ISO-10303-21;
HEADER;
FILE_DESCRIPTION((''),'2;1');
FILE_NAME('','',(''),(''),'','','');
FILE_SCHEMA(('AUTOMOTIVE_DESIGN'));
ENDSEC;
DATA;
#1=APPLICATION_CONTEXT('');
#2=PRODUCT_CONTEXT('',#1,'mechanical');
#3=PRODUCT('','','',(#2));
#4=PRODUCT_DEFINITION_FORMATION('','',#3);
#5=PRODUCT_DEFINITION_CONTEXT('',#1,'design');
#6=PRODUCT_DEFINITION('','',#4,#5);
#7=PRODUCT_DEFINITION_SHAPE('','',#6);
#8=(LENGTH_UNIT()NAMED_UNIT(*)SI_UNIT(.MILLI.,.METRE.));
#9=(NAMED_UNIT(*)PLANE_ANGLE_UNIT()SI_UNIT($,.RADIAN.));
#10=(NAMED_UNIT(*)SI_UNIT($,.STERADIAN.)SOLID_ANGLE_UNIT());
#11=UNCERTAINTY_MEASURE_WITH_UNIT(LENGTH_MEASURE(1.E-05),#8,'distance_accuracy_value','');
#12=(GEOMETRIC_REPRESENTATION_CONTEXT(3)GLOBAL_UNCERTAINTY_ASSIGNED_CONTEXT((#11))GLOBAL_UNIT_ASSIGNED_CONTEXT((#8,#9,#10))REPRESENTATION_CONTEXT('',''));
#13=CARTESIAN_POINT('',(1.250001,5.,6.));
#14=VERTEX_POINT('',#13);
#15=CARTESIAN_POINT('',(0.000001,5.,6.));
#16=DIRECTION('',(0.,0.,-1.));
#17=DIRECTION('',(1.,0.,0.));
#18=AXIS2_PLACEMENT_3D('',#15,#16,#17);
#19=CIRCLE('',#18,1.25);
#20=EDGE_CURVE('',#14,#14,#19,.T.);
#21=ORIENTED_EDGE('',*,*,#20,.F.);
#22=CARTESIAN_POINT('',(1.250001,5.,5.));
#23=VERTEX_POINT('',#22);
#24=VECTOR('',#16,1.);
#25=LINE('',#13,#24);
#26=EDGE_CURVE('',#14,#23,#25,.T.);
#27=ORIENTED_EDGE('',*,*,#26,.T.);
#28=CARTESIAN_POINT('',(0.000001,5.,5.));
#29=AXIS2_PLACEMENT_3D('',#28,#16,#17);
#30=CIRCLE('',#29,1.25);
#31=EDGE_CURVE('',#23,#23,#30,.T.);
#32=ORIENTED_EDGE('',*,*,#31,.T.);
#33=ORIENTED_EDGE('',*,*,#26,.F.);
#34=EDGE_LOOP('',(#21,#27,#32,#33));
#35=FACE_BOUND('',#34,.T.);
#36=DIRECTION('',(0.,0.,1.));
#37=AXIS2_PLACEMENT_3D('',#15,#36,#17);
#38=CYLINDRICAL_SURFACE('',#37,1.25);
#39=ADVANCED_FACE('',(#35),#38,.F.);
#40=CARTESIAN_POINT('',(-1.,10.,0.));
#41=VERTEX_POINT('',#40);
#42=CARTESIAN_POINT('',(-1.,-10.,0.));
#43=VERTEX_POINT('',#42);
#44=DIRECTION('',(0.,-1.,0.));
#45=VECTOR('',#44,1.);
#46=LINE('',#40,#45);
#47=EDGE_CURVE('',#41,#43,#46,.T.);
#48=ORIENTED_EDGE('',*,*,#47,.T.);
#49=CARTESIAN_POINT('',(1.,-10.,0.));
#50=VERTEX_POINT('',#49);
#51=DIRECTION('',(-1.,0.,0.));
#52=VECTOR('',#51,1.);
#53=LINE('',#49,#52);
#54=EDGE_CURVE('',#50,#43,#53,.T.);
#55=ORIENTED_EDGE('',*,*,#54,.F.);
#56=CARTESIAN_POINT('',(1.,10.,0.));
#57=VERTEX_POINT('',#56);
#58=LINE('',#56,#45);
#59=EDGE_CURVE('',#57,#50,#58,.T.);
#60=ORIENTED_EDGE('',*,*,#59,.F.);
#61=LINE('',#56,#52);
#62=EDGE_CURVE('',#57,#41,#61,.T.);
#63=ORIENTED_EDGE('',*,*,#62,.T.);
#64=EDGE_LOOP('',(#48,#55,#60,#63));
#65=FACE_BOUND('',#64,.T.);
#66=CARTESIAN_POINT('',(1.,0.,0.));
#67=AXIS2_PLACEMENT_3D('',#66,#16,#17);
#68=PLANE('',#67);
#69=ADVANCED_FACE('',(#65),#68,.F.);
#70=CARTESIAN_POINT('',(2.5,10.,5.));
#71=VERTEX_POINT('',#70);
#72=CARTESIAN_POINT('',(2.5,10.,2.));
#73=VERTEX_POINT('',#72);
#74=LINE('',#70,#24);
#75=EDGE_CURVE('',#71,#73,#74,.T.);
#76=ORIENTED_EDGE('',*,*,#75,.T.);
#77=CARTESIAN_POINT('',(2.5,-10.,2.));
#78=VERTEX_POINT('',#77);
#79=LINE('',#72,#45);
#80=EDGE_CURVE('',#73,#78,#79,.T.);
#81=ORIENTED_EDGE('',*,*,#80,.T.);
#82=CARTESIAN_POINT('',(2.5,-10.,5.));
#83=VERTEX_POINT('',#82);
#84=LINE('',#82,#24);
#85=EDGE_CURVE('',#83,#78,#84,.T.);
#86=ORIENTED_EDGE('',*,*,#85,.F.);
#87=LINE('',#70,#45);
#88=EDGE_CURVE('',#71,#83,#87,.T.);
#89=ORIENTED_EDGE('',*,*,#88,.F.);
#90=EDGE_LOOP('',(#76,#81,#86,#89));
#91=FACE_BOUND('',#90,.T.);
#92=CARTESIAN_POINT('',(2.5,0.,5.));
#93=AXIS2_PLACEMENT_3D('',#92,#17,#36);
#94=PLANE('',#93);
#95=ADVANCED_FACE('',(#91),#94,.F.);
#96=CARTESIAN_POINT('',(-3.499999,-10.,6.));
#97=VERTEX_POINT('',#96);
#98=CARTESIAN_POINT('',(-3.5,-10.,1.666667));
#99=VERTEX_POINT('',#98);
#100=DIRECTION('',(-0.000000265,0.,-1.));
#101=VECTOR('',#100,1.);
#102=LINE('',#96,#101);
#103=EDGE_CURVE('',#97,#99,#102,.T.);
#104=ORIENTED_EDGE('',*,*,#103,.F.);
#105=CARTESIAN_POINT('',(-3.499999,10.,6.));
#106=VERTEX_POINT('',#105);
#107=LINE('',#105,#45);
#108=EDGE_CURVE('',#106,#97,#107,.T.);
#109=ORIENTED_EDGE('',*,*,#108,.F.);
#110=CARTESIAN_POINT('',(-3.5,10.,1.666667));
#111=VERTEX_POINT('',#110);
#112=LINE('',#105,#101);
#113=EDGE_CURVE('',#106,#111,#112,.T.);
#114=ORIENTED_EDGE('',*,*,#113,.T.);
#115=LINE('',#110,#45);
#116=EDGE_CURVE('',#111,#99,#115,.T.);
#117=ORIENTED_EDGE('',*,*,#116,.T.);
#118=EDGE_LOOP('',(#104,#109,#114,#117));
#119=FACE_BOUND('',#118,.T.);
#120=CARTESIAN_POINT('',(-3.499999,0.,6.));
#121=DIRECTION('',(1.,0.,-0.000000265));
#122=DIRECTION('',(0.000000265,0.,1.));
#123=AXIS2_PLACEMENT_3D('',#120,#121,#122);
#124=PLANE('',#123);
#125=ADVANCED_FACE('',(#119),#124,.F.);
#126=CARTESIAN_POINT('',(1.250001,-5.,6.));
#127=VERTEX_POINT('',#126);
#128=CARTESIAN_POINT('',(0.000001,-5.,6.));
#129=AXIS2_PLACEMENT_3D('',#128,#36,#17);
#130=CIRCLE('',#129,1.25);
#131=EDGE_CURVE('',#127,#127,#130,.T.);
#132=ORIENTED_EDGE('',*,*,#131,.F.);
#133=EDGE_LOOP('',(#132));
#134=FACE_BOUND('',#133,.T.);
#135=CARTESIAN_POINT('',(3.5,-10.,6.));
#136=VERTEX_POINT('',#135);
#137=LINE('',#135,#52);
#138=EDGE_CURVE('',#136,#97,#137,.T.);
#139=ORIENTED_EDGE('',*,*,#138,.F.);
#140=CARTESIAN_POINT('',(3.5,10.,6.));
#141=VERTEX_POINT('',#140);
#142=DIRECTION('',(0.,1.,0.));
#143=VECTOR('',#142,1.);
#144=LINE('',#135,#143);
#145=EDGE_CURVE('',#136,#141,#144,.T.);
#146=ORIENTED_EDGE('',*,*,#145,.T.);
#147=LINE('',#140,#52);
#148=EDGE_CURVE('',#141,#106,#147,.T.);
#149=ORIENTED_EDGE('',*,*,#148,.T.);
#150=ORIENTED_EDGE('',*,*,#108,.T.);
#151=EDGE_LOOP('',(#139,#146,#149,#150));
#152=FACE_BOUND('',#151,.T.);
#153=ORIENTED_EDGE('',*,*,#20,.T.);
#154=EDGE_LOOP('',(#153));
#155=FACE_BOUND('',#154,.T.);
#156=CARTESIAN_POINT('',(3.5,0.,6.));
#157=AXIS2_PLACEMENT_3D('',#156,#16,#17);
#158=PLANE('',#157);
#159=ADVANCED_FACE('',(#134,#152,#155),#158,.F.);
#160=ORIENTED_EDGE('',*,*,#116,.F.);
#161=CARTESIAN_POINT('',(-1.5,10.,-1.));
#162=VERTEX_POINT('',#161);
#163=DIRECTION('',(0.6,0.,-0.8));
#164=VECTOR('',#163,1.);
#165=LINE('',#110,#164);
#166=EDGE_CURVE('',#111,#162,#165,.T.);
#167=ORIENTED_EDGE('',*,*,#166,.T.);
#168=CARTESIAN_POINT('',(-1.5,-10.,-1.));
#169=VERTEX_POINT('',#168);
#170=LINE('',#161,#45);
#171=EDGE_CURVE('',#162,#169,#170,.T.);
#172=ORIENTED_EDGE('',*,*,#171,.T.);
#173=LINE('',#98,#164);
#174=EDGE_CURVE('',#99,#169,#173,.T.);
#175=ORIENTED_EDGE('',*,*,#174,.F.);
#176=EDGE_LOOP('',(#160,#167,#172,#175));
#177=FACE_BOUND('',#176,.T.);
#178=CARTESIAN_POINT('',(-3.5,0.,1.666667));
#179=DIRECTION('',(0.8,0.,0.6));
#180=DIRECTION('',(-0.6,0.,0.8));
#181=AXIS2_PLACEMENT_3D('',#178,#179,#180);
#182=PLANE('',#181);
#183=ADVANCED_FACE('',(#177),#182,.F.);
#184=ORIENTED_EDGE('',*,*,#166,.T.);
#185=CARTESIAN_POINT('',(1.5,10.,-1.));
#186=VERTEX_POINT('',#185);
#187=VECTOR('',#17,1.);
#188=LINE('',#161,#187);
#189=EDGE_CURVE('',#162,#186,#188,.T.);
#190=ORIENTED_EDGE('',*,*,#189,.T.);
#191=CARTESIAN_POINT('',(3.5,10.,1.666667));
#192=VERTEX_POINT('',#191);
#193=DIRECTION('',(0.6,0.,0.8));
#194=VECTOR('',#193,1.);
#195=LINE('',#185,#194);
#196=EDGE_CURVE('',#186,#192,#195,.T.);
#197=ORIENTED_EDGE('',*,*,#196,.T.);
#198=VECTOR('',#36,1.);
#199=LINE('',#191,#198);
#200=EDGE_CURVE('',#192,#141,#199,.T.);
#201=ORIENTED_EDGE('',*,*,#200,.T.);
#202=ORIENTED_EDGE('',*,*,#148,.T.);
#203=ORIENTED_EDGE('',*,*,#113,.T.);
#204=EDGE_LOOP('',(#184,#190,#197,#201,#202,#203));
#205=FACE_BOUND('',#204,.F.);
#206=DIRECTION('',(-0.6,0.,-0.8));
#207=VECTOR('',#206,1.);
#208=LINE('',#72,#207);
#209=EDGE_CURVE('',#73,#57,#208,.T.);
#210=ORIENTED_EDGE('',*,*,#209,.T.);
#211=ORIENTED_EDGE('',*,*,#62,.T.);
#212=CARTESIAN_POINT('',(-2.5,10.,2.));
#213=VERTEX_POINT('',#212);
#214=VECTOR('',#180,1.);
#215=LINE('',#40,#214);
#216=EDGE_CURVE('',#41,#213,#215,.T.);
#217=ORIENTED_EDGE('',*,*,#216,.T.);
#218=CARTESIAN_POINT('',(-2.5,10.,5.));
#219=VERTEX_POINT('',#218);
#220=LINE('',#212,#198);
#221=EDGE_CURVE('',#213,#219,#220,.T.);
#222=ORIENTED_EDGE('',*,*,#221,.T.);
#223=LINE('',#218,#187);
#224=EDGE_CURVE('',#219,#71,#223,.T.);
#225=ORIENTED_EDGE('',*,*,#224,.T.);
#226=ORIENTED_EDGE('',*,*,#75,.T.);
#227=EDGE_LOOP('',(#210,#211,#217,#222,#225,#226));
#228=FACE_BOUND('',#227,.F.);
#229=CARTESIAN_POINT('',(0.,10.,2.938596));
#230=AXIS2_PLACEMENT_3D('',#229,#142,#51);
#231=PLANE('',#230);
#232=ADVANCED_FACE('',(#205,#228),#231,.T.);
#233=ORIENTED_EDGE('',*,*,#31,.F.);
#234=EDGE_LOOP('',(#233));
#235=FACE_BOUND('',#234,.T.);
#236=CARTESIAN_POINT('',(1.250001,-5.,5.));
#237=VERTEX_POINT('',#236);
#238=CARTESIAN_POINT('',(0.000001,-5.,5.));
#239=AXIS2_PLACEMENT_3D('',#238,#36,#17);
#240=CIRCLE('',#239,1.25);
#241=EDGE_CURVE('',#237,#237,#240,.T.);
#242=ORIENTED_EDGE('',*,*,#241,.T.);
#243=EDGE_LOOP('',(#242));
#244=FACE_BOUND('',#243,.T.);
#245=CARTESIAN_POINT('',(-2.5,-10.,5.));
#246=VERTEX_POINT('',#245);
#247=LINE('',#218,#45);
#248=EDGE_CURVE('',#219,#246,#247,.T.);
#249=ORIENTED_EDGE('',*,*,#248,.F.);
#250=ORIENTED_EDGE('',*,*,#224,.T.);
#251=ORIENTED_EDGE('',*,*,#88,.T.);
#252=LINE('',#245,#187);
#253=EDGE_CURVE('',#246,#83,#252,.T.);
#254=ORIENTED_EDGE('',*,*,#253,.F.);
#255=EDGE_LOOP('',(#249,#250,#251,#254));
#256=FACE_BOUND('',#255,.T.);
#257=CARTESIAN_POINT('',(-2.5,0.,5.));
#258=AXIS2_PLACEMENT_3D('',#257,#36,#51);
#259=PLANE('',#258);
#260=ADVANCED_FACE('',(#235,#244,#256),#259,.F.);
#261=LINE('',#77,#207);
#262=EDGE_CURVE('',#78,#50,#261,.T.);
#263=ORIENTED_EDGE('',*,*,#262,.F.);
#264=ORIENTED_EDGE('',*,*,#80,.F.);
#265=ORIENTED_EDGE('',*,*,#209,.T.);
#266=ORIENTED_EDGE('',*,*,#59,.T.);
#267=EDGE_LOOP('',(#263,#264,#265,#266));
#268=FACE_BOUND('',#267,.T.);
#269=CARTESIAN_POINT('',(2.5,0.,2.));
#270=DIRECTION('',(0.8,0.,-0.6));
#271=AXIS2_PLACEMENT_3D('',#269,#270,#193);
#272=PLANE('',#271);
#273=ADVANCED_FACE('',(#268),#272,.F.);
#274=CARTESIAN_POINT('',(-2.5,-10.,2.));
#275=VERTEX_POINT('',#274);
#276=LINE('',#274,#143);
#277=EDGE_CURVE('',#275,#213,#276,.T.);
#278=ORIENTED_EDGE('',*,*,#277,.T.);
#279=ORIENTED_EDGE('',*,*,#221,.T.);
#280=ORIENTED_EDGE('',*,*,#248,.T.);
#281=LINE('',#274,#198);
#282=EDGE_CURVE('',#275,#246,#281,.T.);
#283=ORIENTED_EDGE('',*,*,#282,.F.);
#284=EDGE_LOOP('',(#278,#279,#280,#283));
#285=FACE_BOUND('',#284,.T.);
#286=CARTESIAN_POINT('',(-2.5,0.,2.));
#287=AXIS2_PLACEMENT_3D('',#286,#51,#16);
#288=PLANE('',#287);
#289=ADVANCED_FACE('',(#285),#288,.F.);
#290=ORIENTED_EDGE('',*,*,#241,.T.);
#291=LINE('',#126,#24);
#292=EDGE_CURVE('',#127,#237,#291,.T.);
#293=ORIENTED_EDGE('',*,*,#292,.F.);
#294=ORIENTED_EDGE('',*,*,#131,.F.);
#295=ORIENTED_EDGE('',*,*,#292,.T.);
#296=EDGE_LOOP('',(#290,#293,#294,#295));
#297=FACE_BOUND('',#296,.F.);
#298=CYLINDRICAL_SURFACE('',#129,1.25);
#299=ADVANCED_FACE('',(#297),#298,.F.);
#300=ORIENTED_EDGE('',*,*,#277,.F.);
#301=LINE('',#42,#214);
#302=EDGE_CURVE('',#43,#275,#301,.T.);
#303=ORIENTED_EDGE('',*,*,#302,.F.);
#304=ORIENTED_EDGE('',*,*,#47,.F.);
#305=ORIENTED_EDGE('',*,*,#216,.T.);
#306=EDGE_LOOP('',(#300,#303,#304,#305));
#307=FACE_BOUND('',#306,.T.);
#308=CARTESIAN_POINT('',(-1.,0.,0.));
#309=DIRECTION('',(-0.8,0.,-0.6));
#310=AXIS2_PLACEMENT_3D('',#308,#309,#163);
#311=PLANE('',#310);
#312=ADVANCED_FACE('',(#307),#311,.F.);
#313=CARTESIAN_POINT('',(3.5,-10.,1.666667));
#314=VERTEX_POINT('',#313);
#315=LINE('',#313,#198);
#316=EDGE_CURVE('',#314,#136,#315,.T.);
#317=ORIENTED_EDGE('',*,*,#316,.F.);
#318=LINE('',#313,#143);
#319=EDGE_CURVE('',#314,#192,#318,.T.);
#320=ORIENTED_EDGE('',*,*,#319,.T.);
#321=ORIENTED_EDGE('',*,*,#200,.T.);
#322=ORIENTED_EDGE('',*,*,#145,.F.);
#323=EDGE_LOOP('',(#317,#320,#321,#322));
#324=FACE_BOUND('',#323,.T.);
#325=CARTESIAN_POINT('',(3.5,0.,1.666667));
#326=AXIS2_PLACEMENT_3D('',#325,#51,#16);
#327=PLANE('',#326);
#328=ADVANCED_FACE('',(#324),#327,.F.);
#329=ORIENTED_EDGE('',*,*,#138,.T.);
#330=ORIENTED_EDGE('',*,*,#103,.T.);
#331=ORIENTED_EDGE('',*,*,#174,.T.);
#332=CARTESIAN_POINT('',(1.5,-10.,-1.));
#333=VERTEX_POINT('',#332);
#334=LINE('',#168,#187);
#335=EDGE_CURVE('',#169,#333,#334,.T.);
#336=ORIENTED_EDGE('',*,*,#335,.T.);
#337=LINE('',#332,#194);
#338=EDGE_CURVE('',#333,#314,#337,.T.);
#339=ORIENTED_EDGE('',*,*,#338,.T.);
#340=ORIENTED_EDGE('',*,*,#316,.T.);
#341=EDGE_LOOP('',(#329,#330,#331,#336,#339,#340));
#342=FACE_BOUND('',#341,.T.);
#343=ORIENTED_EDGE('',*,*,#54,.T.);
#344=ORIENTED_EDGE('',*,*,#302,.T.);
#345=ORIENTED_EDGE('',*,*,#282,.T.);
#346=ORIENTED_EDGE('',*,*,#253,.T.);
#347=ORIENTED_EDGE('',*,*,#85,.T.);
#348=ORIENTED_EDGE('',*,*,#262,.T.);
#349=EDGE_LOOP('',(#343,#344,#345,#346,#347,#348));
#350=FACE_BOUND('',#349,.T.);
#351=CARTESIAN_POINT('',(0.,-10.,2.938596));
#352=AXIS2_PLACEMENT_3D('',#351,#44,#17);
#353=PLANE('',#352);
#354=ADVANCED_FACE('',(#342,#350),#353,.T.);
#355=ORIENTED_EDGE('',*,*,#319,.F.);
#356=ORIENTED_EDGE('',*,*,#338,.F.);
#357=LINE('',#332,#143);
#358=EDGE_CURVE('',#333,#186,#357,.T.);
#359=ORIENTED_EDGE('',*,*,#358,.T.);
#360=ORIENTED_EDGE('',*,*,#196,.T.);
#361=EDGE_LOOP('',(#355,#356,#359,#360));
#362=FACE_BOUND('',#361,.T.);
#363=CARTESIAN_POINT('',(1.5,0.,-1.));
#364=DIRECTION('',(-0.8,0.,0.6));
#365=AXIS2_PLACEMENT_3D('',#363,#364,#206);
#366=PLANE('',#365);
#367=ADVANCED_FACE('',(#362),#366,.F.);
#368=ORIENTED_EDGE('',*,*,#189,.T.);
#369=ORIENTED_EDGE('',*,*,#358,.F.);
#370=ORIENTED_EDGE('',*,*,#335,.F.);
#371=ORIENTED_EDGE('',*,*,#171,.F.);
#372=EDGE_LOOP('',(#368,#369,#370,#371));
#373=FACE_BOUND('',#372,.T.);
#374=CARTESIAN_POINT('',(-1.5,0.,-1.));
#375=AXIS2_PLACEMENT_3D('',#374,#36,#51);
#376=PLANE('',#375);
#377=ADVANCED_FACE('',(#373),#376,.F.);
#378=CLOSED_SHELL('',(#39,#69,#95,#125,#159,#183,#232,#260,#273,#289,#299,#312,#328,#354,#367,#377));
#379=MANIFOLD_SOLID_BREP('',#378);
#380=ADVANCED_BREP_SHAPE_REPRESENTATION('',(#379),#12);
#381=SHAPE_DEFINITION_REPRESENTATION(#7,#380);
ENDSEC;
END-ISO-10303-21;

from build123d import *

# Parameters (mm, degrees)
F1_DEPTH = 10
F2_R     = 1.25
F3_DEPTH = 1


# Not quite as in the source:
# - ends of sketch curves that miss each other by under 0.0002 mm in the source are joined


with BuildPart() as f1:
    # F0 (on Front) → F1 (new body)
    with BuildSketch(Plane.XZ):
        Polygon((3.5, 6), (-3.4999988526, 6), (-3.5, 1.6666666667), (-1.5, -1), (0, -1), (1.5, -1), (3.5, 1.6666666667), align=None)
        Polygon((-2.5, 5), (0, 5), (2.5, 5), (2.5, 2), (1, 0), (0, 0), (-1, 0), (-2.5, 2), align=None, mode=Mode.SUBTRACT)
    extrude(amount=F1_DEPTH)

    # F2 (on face) → F3 (cut, through all)
    with BuildSketch(Plane.XY.offset(6)):
        with Locations((5.737e-07, -5)):
            Circle(F2_R)
    extrude(amount=-F3_DEPTH, mode=Mode.SUBTRACT)

    # F4: F1 across face


with BuildPart() as f1_1:
    add(f1.part)
    add(f1.part.mirror(Plane(origin=(4.016e-07, 0, 2.8888886977), x_dir=(1, 0, 0), z_dir=(0, 1, 0))))


solid = f1_1.part
